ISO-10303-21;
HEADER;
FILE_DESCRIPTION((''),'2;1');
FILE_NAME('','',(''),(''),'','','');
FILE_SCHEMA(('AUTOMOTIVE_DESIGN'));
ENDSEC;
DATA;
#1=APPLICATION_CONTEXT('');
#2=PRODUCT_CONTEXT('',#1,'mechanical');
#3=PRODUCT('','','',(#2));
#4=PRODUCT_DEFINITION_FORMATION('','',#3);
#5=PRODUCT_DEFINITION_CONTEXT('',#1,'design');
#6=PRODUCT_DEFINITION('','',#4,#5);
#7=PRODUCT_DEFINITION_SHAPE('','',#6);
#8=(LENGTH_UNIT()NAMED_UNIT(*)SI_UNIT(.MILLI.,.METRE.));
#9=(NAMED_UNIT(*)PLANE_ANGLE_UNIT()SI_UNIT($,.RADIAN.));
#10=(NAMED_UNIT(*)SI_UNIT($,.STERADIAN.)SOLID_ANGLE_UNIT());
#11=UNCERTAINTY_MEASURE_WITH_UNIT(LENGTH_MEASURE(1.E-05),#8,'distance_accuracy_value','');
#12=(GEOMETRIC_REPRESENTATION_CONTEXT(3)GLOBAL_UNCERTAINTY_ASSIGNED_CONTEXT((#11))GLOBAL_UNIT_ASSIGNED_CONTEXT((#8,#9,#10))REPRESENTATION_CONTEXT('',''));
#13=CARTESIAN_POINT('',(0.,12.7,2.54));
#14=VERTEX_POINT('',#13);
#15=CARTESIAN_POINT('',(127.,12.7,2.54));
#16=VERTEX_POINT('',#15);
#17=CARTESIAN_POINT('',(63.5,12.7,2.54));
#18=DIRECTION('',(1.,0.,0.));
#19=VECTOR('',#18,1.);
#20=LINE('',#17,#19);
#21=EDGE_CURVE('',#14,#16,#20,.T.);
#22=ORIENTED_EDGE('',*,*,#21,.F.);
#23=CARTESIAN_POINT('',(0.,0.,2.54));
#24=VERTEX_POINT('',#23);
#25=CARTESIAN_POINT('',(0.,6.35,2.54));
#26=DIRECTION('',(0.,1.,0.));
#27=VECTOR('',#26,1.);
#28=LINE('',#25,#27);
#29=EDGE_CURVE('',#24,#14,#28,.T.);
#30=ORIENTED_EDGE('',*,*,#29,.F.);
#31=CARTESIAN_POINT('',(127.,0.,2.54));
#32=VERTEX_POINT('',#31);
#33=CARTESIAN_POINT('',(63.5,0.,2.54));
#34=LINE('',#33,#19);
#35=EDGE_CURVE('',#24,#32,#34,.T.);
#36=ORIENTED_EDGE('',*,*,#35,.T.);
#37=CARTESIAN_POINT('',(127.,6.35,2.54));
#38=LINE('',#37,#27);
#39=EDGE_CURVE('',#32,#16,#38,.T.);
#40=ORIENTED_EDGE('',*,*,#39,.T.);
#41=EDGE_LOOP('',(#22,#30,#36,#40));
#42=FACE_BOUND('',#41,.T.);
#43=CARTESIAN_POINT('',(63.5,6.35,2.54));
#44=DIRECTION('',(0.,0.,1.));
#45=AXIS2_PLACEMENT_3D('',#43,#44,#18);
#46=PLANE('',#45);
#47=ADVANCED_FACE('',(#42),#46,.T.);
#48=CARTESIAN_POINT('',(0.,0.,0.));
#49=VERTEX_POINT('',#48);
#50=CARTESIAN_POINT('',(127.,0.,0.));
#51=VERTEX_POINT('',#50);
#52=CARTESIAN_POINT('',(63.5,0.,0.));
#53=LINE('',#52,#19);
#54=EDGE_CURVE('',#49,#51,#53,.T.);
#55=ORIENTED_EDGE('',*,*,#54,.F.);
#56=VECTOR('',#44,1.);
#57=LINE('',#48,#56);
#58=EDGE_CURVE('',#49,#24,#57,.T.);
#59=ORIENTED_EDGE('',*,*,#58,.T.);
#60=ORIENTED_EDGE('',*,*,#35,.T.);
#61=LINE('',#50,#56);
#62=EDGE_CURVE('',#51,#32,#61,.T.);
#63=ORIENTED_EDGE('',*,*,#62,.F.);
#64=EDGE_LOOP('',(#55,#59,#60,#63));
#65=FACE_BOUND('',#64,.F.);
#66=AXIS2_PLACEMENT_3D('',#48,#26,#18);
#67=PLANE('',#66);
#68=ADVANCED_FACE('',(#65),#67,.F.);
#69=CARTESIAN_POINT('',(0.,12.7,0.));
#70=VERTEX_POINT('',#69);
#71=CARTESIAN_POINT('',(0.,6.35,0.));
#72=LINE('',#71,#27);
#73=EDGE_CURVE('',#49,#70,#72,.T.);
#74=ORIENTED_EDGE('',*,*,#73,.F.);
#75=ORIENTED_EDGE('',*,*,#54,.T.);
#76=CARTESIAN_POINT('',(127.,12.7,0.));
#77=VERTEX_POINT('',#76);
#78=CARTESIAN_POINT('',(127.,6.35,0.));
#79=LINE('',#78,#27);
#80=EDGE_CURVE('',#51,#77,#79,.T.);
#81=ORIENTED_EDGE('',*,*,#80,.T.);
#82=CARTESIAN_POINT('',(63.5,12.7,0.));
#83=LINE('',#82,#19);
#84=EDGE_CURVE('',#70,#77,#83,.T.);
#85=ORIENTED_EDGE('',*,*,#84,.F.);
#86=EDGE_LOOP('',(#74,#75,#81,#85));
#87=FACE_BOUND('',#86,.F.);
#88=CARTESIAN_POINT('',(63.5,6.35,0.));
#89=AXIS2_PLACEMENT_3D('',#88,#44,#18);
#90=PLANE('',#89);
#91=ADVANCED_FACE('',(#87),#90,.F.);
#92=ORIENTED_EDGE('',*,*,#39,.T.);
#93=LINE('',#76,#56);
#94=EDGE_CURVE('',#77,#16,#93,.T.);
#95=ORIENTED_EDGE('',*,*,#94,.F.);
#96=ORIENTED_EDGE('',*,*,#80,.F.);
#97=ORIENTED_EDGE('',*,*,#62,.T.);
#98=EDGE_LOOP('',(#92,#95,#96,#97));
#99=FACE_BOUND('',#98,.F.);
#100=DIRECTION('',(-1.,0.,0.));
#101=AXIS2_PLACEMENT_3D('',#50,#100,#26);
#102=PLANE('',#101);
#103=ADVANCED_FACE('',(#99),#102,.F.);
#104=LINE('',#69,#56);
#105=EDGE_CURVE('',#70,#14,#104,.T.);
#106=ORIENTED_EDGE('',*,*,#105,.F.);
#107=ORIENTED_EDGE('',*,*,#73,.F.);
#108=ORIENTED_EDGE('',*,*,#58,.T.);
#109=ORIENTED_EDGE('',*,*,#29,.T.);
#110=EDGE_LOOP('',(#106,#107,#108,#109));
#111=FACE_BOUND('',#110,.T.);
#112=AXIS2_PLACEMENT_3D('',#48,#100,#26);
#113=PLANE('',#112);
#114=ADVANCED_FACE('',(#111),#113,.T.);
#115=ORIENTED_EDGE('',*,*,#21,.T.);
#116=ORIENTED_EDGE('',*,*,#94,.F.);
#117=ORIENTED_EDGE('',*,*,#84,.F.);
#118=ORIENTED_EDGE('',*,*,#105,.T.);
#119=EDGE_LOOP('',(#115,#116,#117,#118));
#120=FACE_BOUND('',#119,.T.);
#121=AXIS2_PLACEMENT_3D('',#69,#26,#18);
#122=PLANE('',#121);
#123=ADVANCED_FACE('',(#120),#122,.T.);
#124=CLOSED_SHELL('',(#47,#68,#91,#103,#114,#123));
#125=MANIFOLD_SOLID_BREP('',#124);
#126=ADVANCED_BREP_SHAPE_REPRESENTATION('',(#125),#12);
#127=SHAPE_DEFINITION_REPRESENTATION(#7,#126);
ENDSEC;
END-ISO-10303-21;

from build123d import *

# Parameters (mm, degrees)
F0_W     = 127
F0_H     = 12.7
F1_DEPTH = 2.54


# Not quite as in the source:
# - a feature names something its author has since deleted; it is built from what else it names


with BuildPart() as f1:
    # F0 (on Top) → F1 (new body)
    with BuildSketch(Plane.XY):
        with Locations((63.5, 6.35)):
            Rectangle(F0_W, F0_H)
    extrude(amount=F1_DEPTH)


solid = f1.part
